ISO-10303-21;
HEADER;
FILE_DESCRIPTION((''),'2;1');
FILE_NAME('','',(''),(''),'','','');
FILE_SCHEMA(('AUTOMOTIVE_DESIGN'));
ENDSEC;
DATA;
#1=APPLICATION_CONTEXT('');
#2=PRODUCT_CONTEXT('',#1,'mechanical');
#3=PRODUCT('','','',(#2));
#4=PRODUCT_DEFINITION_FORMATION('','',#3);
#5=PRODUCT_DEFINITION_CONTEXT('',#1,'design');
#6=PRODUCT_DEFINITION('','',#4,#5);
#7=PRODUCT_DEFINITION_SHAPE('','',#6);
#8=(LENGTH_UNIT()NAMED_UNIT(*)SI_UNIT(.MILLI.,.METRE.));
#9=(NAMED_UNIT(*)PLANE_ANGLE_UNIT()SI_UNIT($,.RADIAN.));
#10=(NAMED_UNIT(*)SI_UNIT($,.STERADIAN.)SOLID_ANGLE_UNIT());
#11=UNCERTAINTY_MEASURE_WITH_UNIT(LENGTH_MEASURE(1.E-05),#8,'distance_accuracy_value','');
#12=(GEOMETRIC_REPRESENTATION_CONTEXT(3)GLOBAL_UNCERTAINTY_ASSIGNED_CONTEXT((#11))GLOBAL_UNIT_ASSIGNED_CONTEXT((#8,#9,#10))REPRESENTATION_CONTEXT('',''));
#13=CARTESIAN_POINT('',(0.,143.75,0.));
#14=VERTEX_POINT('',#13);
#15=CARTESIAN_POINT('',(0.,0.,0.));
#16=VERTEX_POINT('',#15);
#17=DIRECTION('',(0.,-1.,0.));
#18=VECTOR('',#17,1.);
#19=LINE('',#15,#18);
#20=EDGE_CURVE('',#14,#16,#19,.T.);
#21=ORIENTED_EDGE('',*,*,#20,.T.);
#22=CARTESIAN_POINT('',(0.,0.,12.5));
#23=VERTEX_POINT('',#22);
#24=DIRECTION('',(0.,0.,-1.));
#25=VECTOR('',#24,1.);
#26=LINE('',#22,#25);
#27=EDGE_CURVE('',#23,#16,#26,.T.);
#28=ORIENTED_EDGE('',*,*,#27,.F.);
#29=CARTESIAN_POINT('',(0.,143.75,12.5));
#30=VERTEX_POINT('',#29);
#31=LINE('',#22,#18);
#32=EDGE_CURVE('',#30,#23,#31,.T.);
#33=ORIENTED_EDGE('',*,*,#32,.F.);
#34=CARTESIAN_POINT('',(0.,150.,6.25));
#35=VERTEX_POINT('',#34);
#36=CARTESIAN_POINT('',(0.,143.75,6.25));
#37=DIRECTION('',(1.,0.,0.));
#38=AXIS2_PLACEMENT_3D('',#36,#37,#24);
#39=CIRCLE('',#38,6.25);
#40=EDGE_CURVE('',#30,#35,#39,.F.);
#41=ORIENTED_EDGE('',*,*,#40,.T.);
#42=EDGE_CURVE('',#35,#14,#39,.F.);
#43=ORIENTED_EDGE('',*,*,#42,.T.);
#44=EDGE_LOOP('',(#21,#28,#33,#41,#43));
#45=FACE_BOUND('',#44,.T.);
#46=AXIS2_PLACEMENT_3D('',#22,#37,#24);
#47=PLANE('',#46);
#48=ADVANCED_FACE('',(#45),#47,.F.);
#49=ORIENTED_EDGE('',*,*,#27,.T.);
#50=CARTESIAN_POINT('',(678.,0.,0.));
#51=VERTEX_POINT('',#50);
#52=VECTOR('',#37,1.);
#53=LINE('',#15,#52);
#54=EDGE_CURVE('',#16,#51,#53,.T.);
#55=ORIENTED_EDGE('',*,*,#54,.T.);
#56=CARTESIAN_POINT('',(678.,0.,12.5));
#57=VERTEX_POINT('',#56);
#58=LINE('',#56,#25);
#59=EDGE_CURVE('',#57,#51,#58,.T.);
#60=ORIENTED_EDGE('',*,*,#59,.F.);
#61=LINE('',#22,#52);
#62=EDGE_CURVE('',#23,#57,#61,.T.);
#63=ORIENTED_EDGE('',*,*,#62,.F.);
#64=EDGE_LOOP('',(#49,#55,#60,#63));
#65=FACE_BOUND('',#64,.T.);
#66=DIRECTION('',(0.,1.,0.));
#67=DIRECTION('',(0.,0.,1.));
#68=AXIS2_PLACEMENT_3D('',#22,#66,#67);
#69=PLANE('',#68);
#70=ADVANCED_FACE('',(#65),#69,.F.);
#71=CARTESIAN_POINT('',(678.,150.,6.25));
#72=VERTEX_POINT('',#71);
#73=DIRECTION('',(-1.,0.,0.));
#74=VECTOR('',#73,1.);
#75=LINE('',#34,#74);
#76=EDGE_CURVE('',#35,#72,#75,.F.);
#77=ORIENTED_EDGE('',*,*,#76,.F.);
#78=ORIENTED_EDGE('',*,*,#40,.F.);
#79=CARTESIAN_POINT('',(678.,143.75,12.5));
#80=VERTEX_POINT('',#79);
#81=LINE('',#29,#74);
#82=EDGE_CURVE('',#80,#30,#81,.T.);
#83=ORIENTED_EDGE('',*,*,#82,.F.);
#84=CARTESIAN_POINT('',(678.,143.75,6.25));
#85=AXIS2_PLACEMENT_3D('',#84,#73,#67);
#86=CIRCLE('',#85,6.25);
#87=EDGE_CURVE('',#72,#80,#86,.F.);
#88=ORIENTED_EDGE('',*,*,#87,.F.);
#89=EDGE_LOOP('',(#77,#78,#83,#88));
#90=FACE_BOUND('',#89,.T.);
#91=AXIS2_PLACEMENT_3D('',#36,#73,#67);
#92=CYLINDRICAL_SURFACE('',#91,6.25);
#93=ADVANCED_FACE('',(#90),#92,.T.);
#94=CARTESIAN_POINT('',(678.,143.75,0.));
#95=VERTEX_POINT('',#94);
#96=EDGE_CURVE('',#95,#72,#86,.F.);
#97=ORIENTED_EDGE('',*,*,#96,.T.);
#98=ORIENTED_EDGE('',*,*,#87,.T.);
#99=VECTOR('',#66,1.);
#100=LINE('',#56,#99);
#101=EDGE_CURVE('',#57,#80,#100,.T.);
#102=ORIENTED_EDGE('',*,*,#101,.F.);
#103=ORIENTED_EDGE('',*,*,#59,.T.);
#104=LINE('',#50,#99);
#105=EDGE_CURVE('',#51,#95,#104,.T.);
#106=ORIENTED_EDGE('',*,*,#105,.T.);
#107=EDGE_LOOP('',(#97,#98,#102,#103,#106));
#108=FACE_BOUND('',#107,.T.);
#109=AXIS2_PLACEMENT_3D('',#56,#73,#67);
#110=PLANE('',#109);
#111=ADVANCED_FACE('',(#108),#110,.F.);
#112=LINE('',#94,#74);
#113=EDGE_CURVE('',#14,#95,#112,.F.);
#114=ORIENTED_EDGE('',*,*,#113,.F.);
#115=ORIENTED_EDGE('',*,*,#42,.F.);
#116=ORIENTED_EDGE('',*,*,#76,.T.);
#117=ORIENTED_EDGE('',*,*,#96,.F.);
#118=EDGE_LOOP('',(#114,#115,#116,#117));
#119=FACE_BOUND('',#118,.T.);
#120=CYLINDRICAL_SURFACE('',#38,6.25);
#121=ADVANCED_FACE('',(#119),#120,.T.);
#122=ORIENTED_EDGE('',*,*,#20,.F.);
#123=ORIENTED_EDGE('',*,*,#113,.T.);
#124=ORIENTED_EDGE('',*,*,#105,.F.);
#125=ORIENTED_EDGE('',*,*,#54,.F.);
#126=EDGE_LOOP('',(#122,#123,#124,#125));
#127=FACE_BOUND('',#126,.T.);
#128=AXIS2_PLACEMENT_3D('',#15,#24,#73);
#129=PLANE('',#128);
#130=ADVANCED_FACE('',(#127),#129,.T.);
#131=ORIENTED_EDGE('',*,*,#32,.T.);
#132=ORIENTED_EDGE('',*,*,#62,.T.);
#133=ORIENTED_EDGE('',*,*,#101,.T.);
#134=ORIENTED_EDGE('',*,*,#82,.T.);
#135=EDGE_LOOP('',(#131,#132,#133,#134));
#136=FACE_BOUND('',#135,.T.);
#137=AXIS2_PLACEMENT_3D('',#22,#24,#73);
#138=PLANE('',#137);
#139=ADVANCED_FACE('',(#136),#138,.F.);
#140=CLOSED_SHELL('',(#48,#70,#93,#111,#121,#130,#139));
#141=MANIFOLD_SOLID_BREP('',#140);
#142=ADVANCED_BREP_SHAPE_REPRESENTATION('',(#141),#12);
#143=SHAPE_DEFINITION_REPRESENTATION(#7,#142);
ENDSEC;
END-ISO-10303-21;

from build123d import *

# Parameters (mm, degrees)
SKETCH_1_W      = 678
SKETCH_1_H      = 150
EXTRUDE_1_DEPTH = 12.5
FILLET_1_R      = 6.25
FILLET_2_R      = 6.25


with BuildPart() as part:
    # 草图1 → 凸台-拉伸1 (new body)
    with BuildSketch(Plane.XY):
        with Locations((339, 75)):
            Rectangle(SKETCH_1_W, SKETCH_1_H)
    extrude(amount=EXTRUDE_1_DEPTH)

    # 圆角1
    fillet_1_edges = [part.edges().sort_by_distance(p)[0] for p in [
        (339, 150, 12.5),
    ]]
    fillet(fillet_1_edges, radius=FILLET_1_R)

    # 圆角2
    fillet_2_edges = [part.edges().sort_by_distance(p)[0] for p in [
        (339, 150, 0),
    ]]
    fillet(fillet_2_edges, radius=FILLET_2_R - 0.0001)  # a hair under: the kernel refuses the full size


solid = part.part
